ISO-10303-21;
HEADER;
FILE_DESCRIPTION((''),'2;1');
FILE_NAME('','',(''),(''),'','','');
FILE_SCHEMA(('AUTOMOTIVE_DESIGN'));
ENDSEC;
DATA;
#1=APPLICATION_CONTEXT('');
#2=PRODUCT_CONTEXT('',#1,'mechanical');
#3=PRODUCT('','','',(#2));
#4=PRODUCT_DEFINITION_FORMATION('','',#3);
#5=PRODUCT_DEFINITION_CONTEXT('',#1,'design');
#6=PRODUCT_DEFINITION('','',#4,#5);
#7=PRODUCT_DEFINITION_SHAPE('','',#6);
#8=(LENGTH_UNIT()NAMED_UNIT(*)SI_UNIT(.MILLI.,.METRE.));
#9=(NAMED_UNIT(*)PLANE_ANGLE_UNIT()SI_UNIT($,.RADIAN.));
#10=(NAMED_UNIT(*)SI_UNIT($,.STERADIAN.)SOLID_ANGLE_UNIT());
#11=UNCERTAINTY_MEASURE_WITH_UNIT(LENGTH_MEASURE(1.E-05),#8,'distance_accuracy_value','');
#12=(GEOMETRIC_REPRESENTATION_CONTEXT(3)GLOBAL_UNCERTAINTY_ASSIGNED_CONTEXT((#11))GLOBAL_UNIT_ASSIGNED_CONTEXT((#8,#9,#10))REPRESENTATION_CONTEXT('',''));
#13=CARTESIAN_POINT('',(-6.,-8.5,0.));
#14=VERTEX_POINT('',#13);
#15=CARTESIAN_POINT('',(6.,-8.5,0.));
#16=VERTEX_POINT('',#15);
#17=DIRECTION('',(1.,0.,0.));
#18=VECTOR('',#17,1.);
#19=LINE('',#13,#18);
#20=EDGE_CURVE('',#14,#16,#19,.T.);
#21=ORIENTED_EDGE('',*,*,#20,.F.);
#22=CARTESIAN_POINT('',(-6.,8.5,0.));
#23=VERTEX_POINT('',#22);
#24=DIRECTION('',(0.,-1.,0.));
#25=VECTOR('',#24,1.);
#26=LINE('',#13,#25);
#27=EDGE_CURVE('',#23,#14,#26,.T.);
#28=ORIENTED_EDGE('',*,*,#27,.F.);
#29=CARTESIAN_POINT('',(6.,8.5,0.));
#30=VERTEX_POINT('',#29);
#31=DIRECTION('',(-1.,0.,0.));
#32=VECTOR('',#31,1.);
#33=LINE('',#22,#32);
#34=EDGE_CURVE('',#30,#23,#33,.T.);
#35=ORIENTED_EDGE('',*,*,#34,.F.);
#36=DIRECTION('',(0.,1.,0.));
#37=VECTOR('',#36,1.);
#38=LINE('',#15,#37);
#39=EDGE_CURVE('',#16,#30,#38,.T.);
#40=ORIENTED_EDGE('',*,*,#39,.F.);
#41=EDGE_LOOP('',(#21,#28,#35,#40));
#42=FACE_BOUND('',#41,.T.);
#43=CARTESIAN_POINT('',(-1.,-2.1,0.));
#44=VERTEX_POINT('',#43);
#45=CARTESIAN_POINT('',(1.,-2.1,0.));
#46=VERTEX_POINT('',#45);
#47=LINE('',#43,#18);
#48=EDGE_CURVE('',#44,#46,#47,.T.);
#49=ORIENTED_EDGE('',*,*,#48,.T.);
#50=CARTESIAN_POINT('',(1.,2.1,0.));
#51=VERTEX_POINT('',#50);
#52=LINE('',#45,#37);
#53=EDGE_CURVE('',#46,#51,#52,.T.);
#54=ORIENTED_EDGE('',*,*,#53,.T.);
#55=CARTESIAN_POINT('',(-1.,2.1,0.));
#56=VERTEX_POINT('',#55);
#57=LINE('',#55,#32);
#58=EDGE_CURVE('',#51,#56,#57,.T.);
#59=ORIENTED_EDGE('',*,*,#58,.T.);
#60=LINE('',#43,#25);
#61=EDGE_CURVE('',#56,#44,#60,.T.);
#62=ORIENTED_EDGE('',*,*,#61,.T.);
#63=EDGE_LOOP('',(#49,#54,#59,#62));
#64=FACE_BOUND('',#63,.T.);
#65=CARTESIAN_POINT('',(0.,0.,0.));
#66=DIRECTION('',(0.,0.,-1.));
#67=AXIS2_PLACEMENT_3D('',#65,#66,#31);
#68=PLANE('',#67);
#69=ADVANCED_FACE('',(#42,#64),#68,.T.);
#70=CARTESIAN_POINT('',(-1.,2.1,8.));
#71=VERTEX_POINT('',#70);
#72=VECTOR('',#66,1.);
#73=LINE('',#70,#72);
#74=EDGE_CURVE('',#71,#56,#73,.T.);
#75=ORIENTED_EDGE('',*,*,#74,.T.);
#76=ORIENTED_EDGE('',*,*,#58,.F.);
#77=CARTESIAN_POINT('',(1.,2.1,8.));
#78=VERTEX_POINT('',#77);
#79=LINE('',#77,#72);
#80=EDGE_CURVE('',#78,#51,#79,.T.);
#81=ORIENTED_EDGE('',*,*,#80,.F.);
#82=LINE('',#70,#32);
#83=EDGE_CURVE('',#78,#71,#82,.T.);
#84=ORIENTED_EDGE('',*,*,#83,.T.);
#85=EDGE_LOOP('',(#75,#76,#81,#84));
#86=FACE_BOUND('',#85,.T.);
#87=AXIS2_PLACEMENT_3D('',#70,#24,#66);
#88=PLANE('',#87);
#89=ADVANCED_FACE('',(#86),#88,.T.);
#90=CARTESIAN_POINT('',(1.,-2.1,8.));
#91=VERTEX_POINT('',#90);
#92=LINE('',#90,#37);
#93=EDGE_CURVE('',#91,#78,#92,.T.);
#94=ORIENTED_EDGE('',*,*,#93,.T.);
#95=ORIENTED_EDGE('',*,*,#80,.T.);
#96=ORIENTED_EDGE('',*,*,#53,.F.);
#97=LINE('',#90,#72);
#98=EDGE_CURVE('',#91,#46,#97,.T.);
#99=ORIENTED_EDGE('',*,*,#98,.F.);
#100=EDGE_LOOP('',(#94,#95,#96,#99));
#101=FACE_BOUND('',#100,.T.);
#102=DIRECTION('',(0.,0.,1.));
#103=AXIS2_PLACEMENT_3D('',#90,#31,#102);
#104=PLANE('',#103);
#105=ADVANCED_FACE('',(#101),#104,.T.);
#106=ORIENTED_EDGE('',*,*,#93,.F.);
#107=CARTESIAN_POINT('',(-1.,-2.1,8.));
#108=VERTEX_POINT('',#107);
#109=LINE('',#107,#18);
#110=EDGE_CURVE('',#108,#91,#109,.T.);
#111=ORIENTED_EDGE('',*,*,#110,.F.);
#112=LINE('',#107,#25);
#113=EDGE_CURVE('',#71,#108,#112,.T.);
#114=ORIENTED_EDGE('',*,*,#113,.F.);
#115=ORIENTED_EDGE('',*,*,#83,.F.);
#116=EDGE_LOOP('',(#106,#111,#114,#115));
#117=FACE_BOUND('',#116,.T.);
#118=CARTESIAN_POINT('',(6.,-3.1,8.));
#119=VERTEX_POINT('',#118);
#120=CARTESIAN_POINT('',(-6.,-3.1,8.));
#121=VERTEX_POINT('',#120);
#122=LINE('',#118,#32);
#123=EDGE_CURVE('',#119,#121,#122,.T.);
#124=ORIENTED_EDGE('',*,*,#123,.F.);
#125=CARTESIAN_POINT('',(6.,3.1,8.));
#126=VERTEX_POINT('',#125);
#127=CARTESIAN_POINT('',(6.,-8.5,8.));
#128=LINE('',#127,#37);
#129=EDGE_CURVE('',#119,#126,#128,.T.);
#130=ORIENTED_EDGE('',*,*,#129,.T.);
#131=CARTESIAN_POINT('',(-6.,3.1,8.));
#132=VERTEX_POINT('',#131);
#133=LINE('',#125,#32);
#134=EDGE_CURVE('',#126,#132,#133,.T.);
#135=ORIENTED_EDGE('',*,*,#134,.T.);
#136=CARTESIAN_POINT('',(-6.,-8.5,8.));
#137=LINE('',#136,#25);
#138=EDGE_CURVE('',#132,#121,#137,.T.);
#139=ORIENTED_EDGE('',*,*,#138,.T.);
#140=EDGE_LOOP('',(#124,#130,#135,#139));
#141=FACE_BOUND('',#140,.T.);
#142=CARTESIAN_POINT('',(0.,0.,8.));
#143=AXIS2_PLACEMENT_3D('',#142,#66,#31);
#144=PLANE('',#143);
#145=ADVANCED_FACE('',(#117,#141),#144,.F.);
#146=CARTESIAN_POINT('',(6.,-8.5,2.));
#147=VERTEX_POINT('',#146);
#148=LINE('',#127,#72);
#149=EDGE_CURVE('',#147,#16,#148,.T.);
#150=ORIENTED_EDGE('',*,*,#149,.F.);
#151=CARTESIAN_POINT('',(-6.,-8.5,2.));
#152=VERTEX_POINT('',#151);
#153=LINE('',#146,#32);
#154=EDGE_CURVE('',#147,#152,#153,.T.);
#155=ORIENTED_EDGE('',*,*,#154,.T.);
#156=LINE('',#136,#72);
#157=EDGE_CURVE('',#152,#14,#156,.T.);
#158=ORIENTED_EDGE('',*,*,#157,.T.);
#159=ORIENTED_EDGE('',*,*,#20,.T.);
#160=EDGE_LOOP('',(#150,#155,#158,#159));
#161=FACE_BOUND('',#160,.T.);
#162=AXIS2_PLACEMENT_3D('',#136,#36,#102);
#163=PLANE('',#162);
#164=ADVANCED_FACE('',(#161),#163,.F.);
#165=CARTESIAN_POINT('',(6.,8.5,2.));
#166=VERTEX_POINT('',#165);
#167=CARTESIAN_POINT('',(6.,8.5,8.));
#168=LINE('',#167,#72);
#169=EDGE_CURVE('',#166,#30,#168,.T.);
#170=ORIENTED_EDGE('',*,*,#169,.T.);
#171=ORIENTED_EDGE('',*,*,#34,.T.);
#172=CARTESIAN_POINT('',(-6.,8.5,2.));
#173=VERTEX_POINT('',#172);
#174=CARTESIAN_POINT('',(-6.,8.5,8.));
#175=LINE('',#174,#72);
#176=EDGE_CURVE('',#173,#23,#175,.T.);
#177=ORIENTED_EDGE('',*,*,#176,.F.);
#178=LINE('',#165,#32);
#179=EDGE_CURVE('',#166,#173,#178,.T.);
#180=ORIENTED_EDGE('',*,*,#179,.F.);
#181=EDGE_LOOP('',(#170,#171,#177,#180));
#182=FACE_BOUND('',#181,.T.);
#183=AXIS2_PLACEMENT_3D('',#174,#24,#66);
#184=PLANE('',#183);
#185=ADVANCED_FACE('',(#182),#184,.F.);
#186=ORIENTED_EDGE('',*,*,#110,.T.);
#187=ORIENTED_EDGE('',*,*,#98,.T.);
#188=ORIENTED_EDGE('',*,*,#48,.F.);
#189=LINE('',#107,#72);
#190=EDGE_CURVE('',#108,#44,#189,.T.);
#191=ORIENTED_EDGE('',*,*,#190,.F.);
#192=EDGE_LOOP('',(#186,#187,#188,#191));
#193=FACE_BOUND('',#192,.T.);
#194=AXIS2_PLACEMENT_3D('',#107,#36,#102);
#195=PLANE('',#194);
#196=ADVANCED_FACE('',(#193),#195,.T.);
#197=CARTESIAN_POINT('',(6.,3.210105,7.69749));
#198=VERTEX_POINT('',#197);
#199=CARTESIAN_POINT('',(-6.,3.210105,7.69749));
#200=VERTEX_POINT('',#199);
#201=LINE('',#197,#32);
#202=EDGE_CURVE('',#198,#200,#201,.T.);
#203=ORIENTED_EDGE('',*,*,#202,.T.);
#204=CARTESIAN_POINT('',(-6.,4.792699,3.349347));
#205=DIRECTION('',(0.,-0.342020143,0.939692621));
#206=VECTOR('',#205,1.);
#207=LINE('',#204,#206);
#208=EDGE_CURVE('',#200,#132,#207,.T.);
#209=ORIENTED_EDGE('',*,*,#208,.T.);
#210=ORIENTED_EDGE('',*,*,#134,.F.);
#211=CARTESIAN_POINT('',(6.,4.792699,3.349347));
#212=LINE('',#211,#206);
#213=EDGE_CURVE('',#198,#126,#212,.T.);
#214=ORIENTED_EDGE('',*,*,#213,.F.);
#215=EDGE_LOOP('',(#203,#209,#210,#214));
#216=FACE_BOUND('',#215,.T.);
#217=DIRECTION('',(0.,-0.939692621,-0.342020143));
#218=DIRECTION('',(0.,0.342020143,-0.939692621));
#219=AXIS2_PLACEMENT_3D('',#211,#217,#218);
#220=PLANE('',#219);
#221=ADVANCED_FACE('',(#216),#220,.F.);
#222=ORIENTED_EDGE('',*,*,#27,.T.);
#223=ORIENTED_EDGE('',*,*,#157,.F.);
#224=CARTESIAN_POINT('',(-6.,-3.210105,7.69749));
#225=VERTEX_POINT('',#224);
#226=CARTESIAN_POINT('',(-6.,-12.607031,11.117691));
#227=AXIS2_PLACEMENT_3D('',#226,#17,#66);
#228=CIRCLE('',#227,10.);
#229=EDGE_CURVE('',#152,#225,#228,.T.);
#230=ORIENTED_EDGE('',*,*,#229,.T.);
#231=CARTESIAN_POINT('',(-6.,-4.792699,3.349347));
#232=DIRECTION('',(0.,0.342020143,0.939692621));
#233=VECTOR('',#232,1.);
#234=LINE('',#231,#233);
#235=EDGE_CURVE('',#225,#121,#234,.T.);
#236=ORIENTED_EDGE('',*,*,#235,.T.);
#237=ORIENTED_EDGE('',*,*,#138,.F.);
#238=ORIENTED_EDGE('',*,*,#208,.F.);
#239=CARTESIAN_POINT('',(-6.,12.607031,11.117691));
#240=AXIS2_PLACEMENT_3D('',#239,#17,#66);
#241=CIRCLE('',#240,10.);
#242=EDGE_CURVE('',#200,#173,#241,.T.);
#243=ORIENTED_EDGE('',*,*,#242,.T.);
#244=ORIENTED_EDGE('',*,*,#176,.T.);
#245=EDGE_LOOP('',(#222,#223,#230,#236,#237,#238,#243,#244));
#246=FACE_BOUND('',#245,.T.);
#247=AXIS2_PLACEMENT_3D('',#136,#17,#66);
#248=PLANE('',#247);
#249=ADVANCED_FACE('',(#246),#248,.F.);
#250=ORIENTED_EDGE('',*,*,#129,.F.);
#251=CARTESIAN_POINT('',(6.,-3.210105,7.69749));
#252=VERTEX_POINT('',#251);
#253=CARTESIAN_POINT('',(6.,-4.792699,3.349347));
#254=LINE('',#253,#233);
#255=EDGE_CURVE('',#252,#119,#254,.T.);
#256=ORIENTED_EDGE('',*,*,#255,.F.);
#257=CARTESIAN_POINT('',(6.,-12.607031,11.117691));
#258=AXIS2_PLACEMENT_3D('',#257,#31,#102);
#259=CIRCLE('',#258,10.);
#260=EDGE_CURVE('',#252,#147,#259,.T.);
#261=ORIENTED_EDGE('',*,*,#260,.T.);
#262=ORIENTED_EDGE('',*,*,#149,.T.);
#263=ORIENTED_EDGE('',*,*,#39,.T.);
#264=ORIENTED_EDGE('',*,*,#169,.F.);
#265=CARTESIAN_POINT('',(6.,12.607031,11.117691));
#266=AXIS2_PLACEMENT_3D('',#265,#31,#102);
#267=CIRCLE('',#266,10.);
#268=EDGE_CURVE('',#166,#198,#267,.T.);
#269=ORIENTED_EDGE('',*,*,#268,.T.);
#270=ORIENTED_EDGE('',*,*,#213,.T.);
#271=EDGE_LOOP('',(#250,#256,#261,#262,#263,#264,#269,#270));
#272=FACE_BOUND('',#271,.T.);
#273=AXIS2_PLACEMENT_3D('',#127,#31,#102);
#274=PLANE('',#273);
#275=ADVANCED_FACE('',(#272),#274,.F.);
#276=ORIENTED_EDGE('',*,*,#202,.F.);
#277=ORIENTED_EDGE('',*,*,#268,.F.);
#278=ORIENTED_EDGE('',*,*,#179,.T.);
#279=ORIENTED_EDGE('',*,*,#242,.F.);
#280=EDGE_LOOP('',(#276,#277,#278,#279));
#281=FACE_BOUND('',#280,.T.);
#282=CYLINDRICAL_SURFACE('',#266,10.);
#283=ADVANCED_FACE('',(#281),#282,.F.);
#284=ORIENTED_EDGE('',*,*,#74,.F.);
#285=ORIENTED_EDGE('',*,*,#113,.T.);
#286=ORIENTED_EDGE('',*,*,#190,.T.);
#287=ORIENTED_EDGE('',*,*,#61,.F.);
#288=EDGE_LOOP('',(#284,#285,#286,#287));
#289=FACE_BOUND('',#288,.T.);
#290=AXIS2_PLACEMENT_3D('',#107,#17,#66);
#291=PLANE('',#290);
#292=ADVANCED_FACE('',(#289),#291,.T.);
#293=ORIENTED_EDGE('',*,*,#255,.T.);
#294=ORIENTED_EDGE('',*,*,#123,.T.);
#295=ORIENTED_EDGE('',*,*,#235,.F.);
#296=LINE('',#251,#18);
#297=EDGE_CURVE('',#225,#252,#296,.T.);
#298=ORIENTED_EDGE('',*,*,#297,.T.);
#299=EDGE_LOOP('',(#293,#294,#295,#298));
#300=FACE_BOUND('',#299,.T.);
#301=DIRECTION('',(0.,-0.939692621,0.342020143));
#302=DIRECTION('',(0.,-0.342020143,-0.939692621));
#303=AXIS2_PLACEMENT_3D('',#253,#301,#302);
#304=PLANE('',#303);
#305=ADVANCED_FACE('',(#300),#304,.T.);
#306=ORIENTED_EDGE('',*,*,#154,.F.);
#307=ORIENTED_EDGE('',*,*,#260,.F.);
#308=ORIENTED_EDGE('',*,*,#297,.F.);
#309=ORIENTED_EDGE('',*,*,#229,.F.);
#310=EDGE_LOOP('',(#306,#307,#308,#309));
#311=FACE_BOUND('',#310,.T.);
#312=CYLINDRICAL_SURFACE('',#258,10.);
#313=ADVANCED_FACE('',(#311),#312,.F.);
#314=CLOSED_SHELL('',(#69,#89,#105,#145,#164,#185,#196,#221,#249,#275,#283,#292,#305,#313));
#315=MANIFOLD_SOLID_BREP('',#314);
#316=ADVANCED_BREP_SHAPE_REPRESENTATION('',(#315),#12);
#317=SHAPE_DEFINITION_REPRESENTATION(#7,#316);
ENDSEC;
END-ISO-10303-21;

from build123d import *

# Parameters (mm, degrees)
SKETCH1_W      = 12
SKETCH1_H      = 17
SKETCH1_W_2    = 2
SKETCH1_H_2    = 4.2
EXTRUDE1_DEPTH = 8
EXTRUDE2_DEPTH = 17.740669043
FILLET1_R      = 10


with BuildPart() as part:
    # Sketch1 → Extrude1 (new body)
    with BuildSketch(Plane.XY):
        Rectangle(SKETCH1_W, SKETCH1_H)
        Rectangle(SKETCH1_W_2, SKETCH1_H_2, mode=Mode.SUBTRACT)
    extrude(amount=EXTRUDE1_DEPTH)

    # Sketch2 → Extrude2 (cut, through all)
    with BuildSketch(Plane.ZY.offset(6)):
        Polygon((2, 8.5), (3.349347136, 4.792699212), (8, 3.1), (8, 8.5), align=None)
    extrude2 = extrude(amount=-EXTRUDE2_DEPTH, mode=Mode.SUBTRACT)

    # Mirror1: Extrude2 across plane
    add(extrude2.mirror(Plane.ZX), mode=Mode.SUBTRACT)

    # Fillet1
    # the kernel refuses this fillet: 10 mm, written as the material it adds along each edge
    with BuildSketch(Plane(origin=(-6, -4.792699212, 3.349347136), x_dir=(0, -0.9396926207859071, -0.34202014332567254), z_dir=(1, 0, 0))) as fillet1_piece_1:
        with BuildLine():
            CenterArc((4.686139514, -9.972514667), FILLET1_R, 94.249009028, 45.750990972)
            Line((-2.974304917, -3.54463857), (-3.127513806, -3.416081048))
            Line((-3.127513806, -3.416081048), (-0.153208889, 0.128557522))
            Line((-0.153208889, 0.128557522), (0, 0.2))
            ThreePointArc((0, 0.2), (1.972613547, 0.2), (3.930408846, 0.199450293))
            Line((3.930408846, 0.199450293), (3.945227094, 0))
        make_face()
    extrude(amount=12)
    with BuildSketch(Plane(origin=(-6, 4.792699212, 3.349347136), x_dir=(0, 0.9396926207859071, -0.34202014332567254), z_dir=(1, 0, 0))) as fillet1_piece_2:
        with BuildLine():
            CenterArc((4.686139514, 9.972514667), FILLET1_R, 220, 45.750990972)
            Line((-2.974304917, 3.54463857), (-3.127513806, 3.416081048))
            Line((-3.127513806, 3.416081048), (-0.153208889, -0.128557522))
            Line((-0.153208889, -0.128557522), (0, -0.2))
            ThreePointArc((0, -0.2), (1.972613547, -0.2), (3.930408846, -0.199450293))
            Line((3.930408846, -0.199450293), (3.945227094, 0))
        make_face()
    extrude(amount=12)


solid = part.part
